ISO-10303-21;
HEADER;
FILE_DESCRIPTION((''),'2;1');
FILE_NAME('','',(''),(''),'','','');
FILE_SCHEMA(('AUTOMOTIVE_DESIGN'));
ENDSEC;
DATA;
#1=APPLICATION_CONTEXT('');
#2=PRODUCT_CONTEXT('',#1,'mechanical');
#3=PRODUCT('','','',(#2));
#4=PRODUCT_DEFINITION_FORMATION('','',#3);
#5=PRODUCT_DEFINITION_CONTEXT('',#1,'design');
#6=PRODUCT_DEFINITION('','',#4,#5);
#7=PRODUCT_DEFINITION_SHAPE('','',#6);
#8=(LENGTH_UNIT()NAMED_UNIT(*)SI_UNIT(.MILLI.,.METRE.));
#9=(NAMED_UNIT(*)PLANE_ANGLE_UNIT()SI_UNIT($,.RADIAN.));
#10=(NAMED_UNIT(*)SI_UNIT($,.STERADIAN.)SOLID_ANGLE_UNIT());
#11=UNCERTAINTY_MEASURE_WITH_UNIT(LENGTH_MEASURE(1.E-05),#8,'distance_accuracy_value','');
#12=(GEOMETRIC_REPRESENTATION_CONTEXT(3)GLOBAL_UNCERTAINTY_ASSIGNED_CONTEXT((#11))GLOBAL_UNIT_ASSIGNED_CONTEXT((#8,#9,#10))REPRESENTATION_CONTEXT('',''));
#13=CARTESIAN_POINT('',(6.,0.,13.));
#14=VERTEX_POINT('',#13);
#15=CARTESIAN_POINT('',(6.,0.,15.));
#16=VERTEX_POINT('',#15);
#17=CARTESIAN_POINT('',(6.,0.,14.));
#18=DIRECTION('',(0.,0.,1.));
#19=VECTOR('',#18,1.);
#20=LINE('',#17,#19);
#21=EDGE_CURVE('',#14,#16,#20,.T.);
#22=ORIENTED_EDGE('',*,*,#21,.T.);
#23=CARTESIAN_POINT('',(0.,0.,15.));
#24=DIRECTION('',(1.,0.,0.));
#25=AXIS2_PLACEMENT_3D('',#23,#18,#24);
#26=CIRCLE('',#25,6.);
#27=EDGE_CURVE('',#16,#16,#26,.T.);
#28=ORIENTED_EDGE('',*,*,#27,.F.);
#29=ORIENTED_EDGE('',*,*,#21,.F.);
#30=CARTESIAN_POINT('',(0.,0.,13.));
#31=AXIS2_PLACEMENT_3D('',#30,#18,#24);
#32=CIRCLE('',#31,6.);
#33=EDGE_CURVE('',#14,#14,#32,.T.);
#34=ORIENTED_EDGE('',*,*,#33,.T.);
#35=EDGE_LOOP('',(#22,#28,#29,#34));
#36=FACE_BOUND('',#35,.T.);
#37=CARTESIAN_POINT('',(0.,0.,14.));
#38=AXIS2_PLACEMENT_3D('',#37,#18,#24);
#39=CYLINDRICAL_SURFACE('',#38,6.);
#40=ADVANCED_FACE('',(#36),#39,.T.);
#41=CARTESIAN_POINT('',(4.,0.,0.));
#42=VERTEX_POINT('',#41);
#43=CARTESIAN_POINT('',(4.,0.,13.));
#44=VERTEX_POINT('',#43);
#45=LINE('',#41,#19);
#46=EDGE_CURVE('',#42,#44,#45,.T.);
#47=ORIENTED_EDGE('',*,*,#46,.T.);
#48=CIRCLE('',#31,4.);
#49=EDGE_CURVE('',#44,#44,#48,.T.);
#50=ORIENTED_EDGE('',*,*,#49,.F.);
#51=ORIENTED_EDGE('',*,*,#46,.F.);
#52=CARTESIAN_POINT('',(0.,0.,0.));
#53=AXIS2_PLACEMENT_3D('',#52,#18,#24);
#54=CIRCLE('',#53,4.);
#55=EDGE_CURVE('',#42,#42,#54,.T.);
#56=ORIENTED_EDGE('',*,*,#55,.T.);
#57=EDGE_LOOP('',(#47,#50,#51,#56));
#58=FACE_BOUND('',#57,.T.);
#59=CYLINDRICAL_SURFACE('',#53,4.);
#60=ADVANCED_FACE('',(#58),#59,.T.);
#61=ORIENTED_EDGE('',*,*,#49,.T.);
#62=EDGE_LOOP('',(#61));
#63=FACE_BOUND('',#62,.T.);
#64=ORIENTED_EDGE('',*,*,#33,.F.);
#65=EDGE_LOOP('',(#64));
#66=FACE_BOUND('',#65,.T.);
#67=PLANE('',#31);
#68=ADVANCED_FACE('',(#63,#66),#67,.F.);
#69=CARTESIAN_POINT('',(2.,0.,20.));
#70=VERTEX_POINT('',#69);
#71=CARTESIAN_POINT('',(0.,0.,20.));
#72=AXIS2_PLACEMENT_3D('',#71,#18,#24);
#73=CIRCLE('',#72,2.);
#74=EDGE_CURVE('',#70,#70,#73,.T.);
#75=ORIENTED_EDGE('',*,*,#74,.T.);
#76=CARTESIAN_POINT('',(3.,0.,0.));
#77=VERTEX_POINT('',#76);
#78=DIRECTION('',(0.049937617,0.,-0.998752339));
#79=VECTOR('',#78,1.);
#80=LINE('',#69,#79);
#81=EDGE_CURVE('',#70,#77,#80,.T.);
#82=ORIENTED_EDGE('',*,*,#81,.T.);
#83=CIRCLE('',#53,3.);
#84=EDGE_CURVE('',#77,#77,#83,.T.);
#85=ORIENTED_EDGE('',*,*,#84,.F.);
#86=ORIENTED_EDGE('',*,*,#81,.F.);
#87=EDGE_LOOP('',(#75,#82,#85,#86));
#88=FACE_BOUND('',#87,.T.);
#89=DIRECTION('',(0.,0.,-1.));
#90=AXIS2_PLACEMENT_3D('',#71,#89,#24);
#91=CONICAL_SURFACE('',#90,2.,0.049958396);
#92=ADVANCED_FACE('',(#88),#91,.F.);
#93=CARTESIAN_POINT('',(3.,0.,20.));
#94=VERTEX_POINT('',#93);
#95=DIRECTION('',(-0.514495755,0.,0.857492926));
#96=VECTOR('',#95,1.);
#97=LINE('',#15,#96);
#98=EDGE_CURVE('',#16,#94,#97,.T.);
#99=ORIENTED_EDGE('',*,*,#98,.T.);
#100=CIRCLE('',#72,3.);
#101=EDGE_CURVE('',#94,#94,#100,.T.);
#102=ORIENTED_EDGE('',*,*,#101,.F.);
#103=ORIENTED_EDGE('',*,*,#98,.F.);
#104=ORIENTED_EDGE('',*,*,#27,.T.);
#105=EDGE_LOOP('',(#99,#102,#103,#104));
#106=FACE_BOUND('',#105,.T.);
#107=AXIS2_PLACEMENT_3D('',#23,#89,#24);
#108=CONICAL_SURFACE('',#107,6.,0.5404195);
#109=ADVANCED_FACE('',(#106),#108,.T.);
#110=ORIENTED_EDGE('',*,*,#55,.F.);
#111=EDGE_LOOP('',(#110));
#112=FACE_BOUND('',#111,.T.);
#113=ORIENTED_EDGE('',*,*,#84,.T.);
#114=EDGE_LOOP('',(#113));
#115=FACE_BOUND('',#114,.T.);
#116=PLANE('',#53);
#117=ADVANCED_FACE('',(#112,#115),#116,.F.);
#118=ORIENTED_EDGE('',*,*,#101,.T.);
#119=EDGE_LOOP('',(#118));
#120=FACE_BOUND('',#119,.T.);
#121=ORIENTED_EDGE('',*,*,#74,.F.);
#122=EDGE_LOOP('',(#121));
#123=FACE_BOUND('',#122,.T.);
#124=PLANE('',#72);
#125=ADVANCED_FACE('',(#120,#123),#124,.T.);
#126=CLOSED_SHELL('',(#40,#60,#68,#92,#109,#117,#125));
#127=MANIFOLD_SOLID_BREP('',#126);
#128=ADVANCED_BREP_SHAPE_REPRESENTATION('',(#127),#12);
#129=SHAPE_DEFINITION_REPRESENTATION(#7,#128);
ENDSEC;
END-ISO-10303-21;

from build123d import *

# Parameters (mm, degrees)
F0_W = 2
F0_H = 2


# Not quite as in the source:
# - a feature names something its author has since deleted; it is built from what else it names


with BuildPart() as f1:
    # F0 (on Front) → F1 (revolve)
    with BuildSketch(Plane.XZ):
        with Locations((5, 14)):
            Rectangle(F0_W, F0_H)
        Polygon((4, 13), (4, 15), (3, 20), (2, 20), (3, 0), (4, 0), align=None)
        Polygon((3, 20), (4, 15), (6, 15), align=None)
    revolve(axis=Axis((0, 0, 10.5782048777), (0, 0, 1)))


solid = f1.part
